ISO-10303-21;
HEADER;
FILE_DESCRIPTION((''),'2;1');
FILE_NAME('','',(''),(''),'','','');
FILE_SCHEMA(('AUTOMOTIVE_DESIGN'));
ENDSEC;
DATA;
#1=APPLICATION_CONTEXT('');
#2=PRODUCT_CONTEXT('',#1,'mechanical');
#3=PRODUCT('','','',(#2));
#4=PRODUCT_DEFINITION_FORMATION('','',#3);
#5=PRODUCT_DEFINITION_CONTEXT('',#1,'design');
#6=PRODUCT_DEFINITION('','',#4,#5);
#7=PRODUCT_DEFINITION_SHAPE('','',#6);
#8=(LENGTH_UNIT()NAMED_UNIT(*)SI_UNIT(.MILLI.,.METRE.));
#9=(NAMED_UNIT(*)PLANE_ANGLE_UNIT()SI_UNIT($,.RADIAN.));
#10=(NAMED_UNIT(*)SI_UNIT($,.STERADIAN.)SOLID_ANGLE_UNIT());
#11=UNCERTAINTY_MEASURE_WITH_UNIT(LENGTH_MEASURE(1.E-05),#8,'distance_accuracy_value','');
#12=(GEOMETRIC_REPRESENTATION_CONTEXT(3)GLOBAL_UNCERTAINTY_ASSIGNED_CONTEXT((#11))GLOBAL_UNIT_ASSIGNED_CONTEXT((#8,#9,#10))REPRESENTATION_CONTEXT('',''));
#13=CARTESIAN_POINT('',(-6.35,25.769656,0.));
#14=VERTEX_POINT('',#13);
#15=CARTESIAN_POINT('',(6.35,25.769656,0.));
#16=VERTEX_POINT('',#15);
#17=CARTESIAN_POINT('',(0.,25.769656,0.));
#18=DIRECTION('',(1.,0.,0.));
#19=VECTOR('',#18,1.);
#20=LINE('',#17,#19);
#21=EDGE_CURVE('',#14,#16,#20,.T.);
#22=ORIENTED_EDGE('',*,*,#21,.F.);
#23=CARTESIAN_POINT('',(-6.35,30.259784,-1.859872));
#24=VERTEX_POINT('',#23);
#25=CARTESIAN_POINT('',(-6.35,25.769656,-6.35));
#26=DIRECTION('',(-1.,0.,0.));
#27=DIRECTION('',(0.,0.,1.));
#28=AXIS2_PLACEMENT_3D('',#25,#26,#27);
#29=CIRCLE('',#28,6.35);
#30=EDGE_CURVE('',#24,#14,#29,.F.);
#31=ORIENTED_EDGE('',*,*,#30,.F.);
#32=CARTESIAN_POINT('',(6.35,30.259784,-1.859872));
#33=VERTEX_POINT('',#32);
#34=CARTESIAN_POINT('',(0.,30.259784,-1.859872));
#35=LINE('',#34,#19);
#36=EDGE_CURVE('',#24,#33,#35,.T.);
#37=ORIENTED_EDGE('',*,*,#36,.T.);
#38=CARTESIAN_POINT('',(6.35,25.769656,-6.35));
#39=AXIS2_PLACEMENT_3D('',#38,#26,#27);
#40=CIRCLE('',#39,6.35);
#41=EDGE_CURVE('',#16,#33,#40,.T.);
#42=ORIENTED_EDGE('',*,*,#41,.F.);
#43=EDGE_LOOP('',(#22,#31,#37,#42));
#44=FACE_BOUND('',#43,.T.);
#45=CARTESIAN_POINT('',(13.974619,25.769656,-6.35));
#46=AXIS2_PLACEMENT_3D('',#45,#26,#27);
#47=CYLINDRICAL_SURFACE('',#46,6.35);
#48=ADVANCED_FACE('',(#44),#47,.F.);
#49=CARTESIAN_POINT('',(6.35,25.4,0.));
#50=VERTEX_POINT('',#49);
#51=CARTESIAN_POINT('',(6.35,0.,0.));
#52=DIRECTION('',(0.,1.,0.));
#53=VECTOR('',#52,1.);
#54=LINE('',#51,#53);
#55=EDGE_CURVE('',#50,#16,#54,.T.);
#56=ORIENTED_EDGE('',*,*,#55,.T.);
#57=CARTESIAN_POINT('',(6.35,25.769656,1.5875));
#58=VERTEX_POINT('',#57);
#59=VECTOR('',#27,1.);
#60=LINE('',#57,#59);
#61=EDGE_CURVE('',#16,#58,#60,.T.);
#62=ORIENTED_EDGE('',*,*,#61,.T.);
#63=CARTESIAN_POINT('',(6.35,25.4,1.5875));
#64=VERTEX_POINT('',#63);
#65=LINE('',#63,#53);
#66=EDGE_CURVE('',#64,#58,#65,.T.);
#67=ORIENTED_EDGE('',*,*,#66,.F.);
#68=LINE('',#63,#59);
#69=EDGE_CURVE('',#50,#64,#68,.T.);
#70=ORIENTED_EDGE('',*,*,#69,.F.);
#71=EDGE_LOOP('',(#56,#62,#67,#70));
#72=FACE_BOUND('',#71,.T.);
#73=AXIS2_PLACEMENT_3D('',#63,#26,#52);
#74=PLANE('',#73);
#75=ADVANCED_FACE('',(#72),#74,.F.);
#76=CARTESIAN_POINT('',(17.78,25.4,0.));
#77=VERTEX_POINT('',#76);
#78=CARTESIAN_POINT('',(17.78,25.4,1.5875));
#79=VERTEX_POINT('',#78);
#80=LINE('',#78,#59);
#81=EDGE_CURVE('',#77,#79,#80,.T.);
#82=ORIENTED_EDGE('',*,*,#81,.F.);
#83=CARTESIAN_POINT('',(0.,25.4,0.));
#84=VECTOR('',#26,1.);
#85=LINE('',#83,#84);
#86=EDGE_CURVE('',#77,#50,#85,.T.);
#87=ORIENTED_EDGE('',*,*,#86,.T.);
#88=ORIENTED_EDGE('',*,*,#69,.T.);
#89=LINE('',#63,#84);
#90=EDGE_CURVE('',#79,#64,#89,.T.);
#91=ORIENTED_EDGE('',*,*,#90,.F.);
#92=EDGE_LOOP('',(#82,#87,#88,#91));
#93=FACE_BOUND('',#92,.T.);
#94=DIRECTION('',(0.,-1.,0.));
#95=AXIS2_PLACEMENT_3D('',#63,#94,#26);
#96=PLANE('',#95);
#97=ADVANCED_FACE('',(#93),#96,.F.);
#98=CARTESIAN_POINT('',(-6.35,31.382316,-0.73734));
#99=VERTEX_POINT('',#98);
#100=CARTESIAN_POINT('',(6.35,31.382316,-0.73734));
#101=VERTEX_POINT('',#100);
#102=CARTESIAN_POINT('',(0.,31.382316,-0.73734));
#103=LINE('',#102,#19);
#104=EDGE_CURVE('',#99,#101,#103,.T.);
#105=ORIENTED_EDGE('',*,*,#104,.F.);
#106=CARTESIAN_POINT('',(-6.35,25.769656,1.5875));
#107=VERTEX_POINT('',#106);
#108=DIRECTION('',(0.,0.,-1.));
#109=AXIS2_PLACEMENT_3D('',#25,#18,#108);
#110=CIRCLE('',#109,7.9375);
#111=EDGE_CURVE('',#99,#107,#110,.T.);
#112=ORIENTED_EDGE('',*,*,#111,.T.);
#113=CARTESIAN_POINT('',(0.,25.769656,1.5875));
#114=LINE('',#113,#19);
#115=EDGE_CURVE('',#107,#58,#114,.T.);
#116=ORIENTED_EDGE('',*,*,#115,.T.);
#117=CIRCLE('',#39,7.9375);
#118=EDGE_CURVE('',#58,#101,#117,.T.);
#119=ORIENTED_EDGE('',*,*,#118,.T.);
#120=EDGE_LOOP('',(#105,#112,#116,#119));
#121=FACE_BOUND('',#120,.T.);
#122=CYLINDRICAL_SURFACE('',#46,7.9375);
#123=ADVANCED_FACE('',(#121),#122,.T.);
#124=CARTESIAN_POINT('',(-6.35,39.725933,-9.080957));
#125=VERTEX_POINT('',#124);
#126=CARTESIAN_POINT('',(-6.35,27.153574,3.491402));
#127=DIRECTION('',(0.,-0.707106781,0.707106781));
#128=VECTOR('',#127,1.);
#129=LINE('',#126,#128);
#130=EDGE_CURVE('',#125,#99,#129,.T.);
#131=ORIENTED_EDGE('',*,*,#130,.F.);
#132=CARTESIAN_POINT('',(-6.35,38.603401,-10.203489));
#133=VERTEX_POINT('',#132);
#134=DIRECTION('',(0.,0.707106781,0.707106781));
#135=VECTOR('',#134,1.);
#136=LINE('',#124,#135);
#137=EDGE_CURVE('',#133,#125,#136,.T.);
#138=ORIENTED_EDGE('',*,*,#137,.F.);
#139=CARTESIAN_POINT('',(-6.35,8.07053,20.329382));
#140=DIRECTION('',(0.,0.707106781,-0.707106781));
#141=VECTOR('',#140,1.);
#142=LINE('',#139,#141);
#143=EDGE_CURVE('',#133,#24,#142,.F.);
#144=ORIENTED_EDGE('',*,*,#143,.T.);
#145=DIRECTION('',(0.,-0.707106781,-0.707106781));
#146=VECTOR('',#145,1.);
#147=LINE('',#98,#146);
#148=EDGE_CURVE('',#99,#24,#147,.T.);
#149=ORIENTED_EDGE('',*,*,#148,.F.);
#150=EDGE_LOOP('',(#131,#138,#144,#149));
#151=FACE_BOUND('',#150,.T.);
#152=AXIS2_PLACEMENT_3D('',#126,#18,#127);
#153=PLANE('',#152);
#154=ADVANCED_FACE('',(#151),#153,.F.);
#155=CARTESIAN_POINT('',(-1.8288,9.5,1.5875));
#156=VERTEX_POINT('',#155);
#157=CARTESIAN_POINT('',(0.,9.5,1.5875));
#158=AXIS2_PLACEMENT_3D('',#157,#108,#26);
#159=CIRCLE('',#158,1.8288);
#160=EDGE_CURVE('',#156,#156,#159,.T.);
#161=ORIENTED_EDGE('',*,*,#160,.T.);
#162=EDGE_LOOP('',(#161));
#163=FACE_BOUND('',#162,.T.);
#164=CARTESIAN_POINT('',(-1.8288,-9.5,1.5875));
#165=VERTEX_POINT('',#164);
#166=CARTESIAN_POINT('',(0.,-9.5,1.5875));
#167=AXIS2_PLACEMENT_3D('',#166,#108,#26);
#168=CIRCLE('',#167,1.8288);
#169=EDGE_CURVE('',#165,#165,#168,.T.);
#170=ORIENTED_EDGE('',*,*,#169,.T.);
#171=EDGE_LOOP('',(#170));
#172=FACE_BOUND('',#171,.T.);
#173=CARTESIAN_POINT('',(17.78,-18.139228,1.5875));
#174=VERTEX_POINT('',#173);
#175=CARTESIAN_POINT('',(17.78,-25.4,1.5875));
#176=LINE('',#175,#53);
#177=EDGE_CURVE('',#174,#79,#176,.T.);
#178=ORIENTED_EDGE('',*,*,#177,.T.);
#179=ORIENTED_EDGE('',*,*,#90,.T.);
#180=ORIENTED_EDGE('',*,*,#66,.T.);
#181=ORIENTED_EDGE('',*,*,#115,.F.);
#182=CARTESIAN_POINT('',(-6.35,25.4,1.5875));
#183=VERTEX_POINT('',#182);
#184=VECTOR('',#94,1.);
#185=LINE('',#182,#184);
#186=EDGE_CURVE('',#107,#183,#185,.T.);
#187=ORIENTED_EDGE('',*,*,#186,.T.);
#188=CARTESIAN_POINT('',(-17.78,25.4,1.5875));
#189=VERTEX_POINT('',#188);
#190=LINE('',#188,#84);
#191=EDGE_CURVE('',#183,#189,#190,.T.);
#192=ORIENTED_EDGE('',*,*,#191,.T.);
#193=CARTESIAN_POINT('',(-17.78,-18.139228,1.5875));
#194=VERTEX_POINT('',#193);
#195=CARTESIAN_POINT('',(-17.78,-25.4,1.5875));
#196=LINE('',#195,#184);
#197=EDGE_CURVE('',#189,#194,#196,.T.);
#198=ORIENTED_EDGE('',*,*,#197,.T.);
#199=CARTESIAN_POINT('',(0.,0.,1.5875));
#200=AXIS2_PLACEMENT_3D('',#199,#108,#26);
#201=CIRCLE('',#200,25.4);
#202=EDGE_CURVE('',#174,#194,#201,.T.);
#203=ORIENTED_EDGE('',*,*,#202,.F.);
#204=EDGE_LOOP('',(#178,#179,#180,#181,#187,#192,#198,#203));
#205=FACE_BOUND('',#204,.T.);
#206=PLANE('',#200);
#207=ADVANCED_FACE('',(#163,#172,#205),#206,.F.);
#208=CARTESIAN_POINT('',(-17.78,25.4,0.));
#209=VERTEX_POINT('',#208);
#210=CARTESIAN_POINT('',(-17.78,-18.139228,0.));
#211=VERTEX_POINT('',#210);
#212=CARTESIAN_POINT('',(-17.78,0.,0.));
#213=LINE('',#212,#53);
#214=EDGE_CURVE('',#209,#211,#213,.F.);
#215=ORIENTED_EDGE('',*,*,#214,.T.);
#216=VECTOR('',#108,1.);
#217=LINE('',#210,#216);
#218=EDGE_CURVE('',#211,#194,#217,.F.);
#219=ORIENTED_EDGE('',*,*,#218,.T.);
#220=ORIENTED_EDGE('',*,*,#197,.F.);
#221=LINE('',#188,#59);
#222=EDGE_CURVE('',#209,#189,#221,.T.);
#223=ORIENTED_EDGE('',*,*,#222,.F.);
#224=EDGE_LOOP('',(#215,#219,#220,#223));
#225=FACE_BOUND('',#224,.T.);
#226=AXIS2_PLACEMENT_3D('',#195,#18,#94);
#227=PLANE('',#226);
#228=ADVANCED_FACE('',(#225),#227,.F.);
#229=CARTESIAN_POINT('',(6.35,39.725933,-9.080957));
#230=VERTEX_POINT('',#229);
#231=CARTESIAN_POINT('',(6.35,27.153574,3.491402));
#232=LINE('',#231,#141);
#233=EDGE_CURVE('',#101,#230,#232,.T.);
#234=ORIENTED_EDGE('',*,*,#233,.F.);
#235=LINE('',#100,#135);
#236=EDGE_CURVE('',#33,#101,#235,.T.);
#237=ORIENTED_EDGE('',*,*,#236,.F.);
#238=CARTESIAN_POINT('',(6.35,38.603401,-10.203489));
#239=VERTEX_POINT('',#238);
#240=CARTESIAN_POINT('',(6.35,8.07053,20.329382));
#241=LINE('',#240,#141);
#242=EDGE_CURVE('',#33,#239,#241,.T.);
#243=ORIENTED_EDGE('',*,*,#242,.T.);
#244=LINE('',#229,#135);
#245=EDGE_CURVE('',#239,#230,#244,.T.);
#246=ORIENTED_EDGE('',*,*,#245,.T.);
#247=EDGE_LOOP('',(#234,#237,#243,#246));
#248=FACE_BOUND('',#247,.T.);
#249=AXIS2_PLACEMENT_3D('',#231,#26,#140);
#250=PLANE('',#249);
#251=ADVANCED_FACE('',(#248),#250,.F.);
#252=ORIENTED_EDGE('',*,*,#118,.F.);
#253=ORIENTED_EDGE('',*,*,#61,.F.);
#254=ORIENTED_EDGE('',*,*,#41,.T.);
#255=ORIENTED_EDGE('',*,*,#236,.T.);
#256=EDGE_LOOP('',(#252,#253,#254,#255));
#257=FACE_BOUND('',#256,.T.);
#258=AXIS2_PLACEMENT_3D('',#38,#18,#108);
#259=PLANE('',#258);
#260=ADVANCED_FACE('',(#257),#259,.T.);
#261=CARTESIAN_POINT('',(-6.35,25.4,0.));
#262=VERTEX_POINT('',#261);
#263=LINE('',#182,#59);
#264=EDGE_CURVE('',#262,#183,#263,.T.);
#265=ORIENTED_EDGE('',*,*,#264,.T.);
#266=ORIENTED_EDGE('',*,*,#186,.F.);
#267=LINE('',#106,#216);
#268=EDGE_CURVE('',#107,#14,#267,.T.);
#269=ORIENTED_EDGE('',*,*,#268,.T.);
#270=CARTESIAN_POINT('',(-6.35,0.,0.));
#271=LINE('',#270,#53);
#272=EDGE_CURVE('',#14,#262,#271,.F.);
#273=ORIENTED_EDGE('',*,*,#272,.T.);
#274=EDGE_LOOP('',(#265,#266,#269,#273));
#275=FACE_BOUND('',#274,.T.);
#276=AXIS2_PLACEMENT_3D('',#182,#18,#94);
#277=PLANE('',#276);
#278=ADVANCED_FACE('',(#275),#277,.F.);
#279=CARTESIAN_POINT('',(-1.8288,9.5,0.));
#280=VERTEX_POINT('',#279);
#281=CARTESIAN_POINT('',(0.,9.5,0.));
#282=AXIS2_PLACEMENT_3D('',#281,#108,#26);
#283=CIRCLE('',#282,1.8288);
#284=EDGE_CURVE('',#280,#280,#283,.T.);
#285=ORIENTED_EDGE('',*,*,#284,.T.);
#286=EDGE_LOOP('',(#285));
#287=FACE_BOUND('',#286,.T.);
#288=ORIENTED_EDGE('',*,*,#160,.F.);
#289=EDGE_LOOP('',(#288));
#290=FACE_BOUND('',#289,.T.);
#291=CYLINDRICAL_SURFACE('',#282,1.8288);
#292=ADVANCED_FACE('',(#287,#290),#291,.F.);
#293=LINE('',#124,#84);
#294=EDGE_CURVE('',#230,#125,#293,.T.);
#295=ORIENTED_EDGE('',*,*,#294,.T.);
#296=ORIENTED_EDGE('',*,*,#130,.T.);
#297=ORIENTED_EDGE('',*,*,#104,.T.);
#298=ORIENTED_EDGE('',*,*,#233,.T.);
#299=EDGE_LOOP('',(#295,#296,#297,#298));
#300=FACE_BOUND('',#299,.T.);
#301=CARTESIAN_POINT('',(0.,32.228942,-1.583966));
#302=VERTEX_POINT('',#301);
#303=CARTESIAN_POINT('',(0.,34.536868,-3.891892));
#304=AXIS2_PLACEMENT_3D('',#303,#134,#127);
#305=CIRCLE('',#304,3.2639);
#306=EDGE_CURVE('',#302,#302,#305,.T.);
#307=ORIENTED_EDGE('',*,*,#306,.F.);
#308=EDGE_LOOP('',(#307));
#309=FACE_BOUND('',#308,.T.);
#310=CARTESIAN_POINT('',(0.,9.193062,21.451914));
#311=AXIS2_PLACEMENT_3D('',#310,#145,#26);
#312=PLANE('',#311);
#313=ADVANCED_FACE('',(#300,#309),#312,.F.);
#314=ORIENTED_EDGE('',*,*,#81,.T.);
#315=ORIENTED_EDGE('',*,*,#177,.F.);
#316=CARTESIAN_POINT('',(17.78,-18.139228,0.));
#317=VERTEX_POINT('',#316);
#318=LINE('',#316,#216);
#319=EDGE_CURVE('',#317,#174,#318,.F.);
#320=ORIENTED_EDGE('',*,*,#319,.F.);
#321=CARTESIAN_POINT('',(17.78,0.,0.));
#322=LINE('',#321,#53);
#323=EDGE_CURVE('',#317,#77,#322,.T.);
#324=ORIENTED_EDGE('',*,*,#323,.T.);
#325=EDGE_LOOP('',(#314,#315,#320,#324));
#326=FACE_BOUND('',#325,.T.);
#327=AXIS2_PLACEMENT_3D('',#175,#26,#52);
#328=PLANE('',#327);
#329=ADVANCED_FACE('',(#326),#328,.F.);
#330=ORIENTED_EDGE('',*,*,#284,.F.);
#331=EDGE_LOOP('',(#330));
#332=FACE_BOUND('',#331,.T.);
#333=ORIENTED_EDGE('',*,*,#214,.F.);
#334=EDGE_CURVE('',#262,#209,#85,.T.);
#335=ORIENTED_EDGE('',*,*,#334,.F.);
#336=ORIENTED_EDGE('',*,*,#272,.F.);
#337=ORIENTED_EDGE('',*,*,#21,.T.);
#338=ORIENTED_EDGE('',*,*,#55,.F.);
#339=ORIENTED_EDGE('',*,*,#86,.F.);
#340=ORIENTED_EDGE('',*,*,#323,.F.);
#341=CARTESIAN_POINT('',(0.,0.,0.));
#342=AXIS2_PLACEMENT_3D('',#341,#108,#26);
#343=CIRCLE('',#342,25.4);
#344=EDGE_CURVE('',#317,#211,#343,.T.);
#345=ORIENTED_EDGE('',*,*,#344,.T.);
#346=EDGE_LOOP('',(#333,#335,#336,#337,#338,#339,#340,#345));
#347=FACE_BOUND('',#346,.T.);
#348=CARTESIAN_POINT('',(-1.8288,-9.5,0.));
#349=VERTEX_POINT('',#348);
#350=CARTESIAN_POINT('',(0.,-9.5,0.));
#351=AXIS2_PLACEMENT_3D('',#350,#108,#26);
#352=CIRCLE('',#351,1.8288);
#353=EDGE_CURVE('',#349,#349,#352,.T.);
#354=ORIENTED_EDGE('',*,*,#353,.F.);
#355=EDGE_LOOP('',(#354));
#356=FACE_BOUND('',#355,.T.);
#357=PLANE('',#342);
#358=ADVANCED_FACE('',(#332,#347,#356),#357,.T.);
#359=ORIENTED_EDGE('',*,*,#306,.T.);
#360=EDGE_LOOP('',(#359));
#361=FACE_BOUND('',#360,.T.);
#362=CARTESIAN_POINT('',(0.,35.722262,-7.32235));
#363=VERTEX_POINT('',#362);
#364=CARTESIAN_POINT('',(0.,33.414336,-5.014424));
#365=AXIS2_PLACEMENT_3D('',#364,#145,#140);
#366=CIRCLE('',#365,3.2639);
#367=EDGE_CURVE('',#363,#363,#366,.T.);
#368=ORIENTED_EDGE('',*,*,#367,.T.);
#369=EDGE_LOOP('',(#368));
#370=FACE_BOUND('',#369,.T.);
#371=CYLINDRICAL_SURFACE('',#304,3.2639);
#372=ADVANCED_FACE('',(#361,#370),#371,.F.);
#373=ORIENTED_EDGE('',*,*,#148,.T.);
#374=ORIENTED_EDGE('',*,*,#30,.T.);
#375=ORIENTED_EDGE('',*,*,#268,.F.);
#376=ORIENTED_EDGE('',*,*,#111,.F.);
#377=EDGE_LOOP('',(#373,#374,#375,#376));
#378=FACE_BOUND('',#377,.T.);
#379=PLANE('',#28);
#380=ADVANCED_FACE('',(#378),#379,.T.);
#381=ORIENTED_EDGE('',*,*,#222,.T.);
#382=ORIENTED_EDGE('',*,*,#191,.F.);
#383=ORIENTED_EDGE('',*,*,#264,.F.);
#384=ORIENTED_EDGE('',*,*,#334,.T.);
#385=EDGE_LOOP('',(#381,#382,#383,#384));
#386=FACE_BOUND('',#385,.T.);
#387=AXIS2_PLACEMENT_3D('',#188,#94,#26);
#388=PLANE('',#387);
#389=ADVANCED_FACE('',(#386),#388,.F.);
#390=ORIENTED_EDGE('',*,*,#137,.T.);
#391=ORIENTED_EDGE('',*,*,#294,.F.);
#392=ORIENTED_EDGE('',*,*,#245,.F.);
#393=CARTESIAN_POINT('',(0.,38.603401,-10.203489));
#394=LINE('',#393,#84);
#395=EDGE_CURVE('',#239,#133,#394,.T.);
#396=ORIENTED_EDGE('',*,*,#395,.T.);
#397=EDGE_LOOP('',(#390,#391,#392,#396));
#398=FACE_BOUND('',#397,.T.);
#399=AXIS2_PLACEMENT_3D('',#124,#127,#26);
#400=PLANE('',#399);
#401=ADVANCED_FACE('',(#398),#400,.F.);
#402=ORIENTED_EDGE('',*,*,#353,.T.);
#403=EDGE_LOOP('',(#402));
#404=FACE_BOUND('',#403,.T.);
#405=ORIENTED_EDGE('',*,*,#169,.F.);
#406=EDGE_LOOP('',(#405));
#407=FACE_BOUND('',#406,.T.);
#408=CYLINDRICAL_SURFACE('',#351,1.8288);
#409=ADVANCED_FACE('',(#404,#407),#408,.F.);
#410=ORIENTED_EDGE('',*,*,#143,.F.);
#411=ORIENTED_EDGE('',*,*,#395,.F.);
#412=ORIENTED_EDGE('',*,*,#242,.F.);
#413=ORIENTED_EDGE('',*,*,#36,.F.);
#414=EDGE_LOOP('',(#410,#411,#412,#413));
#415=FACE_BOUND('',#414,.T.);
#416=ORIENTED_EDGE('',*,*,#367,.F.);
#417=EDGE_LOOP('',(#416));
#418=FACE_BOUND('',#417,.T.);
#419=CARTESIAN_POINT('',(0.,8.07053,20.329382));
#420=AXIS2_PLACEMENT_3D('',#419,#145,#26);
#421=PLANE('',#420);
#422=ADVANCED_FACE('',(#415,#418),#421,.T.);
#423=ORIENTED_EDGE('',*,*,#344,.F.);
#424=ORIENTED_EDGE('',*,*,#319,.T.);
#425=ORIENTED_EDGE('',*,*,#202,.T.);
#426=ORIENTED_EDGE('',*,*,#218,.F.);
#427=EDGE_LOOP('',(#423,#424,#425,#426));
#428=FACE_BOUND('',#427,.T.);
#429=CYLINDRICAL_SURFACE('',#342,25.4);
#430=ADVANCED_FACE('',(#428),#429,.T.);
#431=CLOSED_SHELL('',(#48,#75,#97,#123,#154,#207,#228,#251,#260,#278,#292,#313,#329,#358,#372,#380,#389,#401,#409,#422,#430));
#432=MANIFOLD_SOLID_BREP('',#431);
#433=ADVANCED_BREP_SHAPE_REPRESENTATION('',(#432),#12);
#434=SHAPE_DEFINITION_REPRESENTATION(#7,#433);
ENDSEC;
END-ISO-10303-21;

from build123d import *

# Parameters (mm, degrees)
BOSS_EXTRUDE1_DEPTH         = 1.5875
F_6_CLEARANCE_HOLE2_D       = 3.6576
F_6_CLEARANCE_HOLE2_DEPTH   = 38.354
F_6_CLEARANCE_HOLE2_TIP     = 1.0988539
SKETCHED_START              = -6.35
SKETCHED_BEND10_DEPTH       = 12.7
SKETCHED_BEND10_2_DEPTH     = 12.7
CUT_EXTRUDE1_DEPTH          = 45.703347893
F_1_4_CLEARANCE_HOLE1_D     = 6.5278
F_1_4_CLEARANCE_HOLE1_DEPTH = 38.354
F_1_4_CLEARANCE_HOLE1_TIP   = 1.961148974


# Read off the part's stored shape, not the designer's step: Sketched Bend10
with BuildPart() as part:
    # Sketch1 → Boss-Extrude1 (new body)
    with BuildSketch(Plane.XY):
        Polygon((-17.78, -25.4), (17.78, -25.4), (17.78, 25.4), (6.35, 25.4), (6.35, 43.18), (-6.35, 43.18), (-6.35, 25.4), (-17.78, 25.4), align=None)
    extrude(amount=BOSS_EXTRUDE1_DEPTH)

    # #6 Clearance Hole2
    with Locations(Plane(origin=(0, 0, 0), x_dir=(-1, 0, 0), z_dir=(0, 0, -1))):
        with Locations((0, 9.5), (0, -9.5)):
            Hole(F_6_CLEARANCE_HOLE2_D / 2, depth=F_6_CLEARANCE_HOLE2_DEPTH)
            with Locations((0, 0, -(F_6_CLEARANCE_HOLE2_DEPTH + F_6_CLEARANCE_HOLE2_TIP / 2))):  # 118° drill point
                Cone(0, F_6_CLEARANCE_HOLE2_D / 2, F_6_CLEARANCE_HOLE2_TIP, mode=Mode.SUBTRACT)

    # Sketched Bend10 outline → Sketched Bend10 (cut)
    with BuildSketch(Plane.YZ.offset(SKETCHED_START)):
        with BuildLine():
            ThreePointArc((25.769655935, 1.5875), (28.279713828, 1.180173678), (30.532155935, 0))
            Line((30.532155935, 0), (43.18, 0))
            Line((43.18, 0), (43.18, 1.5875))
            Line((43.18, 1.5875), (25.769655935, 1.5875))
        make_face()
    extrude(amount=SKETCHED_BEND10_DEPTH, mode=Mode.SUBTRACT)

    # Sketched Bend10 2 outline → Sketched Bend10 2 (add)
    with BuildSketch(Plane.YZ.offset(SKETCHED_START)):
        with BuildLine():
            Line((39.725932738, -9.080956652), (31.382316011, -0.737339924))
            ThreePointArc((31.382316011, -0.737339924), (30.970319757, -0.353584232), (30.532155935, 0))
            Line((30.532155935, 0), (25.769655935, 0))
            ThreePointArc((25.769655935, 0), (28.19969573, -0.483364969), (30.259783996, -1.859871939))
            Line((30.259783996, -1.859871939), (38.603400723, -10.203488667))
            Line((38.603400723, -10.203488667), (39.725932738, -9.080956652))
        make_face()
    extrude(amount=SKETCHED_BEND10_2_DEPTH)

    # Sketch18 → Cut-Extrude1 (cut, through all)
    with BuildSketch(Plane(origin=(0, 0, 0), x_dir=(-1, 0, 0), z_dir=(0, 0, -1))):
        with BuildLine():
            Line((-17.78, -25.4), (0, -25.4))
            ThreePointArc((0, -25.4), (-9.602697629, -23.51485059), (-17.78, -18.139228208))
            Line((-17.78, -18.139228208), (-17.78, -25.4))
        make_face()
        with BuildLine():
            Line((17.78, -25.4), (17.78, -18.139228208))
            ThreePointArc((17.78, -18.139228208), (9.602697629, -23.51485059), (0, -25.4))
            Line((0, -25.4), (17.78, -25.4))
        make_face()
    extrude(amount=-CUT_EXTRUDE1_DEPTH, mode=Mode.SUBTRACT)

    # 1/4 Clearance Hole1
    with Locations(Plane(origin=(0, 15.322488043, 15.322488043), x_dir=(1, 0, 0), z_dir=(0, 0.7071067811865487, 0.7071067811865465))):
        with Locations((0, 27.173236583)):
            Hole(F_1_4_CLEARANCE_HOLE1_D / 2, depth=F_1_4_CLEARANCE_HOLE1_DEPTH)
            with Locations((0, 0, -(F_1_4_CLEARANCE_HOLE1_DEPTH + F_1_4_CLEARANCE_HOLE1_TIP / 2))):  # 118° drill point
                Cone(0, F_1_4_CLEARANCE_HOLE1_D / 2, F_1_4_CLEARANCE_HOLE1_TIP, mode=Mode.SUBTRACT)


solid = part.part
